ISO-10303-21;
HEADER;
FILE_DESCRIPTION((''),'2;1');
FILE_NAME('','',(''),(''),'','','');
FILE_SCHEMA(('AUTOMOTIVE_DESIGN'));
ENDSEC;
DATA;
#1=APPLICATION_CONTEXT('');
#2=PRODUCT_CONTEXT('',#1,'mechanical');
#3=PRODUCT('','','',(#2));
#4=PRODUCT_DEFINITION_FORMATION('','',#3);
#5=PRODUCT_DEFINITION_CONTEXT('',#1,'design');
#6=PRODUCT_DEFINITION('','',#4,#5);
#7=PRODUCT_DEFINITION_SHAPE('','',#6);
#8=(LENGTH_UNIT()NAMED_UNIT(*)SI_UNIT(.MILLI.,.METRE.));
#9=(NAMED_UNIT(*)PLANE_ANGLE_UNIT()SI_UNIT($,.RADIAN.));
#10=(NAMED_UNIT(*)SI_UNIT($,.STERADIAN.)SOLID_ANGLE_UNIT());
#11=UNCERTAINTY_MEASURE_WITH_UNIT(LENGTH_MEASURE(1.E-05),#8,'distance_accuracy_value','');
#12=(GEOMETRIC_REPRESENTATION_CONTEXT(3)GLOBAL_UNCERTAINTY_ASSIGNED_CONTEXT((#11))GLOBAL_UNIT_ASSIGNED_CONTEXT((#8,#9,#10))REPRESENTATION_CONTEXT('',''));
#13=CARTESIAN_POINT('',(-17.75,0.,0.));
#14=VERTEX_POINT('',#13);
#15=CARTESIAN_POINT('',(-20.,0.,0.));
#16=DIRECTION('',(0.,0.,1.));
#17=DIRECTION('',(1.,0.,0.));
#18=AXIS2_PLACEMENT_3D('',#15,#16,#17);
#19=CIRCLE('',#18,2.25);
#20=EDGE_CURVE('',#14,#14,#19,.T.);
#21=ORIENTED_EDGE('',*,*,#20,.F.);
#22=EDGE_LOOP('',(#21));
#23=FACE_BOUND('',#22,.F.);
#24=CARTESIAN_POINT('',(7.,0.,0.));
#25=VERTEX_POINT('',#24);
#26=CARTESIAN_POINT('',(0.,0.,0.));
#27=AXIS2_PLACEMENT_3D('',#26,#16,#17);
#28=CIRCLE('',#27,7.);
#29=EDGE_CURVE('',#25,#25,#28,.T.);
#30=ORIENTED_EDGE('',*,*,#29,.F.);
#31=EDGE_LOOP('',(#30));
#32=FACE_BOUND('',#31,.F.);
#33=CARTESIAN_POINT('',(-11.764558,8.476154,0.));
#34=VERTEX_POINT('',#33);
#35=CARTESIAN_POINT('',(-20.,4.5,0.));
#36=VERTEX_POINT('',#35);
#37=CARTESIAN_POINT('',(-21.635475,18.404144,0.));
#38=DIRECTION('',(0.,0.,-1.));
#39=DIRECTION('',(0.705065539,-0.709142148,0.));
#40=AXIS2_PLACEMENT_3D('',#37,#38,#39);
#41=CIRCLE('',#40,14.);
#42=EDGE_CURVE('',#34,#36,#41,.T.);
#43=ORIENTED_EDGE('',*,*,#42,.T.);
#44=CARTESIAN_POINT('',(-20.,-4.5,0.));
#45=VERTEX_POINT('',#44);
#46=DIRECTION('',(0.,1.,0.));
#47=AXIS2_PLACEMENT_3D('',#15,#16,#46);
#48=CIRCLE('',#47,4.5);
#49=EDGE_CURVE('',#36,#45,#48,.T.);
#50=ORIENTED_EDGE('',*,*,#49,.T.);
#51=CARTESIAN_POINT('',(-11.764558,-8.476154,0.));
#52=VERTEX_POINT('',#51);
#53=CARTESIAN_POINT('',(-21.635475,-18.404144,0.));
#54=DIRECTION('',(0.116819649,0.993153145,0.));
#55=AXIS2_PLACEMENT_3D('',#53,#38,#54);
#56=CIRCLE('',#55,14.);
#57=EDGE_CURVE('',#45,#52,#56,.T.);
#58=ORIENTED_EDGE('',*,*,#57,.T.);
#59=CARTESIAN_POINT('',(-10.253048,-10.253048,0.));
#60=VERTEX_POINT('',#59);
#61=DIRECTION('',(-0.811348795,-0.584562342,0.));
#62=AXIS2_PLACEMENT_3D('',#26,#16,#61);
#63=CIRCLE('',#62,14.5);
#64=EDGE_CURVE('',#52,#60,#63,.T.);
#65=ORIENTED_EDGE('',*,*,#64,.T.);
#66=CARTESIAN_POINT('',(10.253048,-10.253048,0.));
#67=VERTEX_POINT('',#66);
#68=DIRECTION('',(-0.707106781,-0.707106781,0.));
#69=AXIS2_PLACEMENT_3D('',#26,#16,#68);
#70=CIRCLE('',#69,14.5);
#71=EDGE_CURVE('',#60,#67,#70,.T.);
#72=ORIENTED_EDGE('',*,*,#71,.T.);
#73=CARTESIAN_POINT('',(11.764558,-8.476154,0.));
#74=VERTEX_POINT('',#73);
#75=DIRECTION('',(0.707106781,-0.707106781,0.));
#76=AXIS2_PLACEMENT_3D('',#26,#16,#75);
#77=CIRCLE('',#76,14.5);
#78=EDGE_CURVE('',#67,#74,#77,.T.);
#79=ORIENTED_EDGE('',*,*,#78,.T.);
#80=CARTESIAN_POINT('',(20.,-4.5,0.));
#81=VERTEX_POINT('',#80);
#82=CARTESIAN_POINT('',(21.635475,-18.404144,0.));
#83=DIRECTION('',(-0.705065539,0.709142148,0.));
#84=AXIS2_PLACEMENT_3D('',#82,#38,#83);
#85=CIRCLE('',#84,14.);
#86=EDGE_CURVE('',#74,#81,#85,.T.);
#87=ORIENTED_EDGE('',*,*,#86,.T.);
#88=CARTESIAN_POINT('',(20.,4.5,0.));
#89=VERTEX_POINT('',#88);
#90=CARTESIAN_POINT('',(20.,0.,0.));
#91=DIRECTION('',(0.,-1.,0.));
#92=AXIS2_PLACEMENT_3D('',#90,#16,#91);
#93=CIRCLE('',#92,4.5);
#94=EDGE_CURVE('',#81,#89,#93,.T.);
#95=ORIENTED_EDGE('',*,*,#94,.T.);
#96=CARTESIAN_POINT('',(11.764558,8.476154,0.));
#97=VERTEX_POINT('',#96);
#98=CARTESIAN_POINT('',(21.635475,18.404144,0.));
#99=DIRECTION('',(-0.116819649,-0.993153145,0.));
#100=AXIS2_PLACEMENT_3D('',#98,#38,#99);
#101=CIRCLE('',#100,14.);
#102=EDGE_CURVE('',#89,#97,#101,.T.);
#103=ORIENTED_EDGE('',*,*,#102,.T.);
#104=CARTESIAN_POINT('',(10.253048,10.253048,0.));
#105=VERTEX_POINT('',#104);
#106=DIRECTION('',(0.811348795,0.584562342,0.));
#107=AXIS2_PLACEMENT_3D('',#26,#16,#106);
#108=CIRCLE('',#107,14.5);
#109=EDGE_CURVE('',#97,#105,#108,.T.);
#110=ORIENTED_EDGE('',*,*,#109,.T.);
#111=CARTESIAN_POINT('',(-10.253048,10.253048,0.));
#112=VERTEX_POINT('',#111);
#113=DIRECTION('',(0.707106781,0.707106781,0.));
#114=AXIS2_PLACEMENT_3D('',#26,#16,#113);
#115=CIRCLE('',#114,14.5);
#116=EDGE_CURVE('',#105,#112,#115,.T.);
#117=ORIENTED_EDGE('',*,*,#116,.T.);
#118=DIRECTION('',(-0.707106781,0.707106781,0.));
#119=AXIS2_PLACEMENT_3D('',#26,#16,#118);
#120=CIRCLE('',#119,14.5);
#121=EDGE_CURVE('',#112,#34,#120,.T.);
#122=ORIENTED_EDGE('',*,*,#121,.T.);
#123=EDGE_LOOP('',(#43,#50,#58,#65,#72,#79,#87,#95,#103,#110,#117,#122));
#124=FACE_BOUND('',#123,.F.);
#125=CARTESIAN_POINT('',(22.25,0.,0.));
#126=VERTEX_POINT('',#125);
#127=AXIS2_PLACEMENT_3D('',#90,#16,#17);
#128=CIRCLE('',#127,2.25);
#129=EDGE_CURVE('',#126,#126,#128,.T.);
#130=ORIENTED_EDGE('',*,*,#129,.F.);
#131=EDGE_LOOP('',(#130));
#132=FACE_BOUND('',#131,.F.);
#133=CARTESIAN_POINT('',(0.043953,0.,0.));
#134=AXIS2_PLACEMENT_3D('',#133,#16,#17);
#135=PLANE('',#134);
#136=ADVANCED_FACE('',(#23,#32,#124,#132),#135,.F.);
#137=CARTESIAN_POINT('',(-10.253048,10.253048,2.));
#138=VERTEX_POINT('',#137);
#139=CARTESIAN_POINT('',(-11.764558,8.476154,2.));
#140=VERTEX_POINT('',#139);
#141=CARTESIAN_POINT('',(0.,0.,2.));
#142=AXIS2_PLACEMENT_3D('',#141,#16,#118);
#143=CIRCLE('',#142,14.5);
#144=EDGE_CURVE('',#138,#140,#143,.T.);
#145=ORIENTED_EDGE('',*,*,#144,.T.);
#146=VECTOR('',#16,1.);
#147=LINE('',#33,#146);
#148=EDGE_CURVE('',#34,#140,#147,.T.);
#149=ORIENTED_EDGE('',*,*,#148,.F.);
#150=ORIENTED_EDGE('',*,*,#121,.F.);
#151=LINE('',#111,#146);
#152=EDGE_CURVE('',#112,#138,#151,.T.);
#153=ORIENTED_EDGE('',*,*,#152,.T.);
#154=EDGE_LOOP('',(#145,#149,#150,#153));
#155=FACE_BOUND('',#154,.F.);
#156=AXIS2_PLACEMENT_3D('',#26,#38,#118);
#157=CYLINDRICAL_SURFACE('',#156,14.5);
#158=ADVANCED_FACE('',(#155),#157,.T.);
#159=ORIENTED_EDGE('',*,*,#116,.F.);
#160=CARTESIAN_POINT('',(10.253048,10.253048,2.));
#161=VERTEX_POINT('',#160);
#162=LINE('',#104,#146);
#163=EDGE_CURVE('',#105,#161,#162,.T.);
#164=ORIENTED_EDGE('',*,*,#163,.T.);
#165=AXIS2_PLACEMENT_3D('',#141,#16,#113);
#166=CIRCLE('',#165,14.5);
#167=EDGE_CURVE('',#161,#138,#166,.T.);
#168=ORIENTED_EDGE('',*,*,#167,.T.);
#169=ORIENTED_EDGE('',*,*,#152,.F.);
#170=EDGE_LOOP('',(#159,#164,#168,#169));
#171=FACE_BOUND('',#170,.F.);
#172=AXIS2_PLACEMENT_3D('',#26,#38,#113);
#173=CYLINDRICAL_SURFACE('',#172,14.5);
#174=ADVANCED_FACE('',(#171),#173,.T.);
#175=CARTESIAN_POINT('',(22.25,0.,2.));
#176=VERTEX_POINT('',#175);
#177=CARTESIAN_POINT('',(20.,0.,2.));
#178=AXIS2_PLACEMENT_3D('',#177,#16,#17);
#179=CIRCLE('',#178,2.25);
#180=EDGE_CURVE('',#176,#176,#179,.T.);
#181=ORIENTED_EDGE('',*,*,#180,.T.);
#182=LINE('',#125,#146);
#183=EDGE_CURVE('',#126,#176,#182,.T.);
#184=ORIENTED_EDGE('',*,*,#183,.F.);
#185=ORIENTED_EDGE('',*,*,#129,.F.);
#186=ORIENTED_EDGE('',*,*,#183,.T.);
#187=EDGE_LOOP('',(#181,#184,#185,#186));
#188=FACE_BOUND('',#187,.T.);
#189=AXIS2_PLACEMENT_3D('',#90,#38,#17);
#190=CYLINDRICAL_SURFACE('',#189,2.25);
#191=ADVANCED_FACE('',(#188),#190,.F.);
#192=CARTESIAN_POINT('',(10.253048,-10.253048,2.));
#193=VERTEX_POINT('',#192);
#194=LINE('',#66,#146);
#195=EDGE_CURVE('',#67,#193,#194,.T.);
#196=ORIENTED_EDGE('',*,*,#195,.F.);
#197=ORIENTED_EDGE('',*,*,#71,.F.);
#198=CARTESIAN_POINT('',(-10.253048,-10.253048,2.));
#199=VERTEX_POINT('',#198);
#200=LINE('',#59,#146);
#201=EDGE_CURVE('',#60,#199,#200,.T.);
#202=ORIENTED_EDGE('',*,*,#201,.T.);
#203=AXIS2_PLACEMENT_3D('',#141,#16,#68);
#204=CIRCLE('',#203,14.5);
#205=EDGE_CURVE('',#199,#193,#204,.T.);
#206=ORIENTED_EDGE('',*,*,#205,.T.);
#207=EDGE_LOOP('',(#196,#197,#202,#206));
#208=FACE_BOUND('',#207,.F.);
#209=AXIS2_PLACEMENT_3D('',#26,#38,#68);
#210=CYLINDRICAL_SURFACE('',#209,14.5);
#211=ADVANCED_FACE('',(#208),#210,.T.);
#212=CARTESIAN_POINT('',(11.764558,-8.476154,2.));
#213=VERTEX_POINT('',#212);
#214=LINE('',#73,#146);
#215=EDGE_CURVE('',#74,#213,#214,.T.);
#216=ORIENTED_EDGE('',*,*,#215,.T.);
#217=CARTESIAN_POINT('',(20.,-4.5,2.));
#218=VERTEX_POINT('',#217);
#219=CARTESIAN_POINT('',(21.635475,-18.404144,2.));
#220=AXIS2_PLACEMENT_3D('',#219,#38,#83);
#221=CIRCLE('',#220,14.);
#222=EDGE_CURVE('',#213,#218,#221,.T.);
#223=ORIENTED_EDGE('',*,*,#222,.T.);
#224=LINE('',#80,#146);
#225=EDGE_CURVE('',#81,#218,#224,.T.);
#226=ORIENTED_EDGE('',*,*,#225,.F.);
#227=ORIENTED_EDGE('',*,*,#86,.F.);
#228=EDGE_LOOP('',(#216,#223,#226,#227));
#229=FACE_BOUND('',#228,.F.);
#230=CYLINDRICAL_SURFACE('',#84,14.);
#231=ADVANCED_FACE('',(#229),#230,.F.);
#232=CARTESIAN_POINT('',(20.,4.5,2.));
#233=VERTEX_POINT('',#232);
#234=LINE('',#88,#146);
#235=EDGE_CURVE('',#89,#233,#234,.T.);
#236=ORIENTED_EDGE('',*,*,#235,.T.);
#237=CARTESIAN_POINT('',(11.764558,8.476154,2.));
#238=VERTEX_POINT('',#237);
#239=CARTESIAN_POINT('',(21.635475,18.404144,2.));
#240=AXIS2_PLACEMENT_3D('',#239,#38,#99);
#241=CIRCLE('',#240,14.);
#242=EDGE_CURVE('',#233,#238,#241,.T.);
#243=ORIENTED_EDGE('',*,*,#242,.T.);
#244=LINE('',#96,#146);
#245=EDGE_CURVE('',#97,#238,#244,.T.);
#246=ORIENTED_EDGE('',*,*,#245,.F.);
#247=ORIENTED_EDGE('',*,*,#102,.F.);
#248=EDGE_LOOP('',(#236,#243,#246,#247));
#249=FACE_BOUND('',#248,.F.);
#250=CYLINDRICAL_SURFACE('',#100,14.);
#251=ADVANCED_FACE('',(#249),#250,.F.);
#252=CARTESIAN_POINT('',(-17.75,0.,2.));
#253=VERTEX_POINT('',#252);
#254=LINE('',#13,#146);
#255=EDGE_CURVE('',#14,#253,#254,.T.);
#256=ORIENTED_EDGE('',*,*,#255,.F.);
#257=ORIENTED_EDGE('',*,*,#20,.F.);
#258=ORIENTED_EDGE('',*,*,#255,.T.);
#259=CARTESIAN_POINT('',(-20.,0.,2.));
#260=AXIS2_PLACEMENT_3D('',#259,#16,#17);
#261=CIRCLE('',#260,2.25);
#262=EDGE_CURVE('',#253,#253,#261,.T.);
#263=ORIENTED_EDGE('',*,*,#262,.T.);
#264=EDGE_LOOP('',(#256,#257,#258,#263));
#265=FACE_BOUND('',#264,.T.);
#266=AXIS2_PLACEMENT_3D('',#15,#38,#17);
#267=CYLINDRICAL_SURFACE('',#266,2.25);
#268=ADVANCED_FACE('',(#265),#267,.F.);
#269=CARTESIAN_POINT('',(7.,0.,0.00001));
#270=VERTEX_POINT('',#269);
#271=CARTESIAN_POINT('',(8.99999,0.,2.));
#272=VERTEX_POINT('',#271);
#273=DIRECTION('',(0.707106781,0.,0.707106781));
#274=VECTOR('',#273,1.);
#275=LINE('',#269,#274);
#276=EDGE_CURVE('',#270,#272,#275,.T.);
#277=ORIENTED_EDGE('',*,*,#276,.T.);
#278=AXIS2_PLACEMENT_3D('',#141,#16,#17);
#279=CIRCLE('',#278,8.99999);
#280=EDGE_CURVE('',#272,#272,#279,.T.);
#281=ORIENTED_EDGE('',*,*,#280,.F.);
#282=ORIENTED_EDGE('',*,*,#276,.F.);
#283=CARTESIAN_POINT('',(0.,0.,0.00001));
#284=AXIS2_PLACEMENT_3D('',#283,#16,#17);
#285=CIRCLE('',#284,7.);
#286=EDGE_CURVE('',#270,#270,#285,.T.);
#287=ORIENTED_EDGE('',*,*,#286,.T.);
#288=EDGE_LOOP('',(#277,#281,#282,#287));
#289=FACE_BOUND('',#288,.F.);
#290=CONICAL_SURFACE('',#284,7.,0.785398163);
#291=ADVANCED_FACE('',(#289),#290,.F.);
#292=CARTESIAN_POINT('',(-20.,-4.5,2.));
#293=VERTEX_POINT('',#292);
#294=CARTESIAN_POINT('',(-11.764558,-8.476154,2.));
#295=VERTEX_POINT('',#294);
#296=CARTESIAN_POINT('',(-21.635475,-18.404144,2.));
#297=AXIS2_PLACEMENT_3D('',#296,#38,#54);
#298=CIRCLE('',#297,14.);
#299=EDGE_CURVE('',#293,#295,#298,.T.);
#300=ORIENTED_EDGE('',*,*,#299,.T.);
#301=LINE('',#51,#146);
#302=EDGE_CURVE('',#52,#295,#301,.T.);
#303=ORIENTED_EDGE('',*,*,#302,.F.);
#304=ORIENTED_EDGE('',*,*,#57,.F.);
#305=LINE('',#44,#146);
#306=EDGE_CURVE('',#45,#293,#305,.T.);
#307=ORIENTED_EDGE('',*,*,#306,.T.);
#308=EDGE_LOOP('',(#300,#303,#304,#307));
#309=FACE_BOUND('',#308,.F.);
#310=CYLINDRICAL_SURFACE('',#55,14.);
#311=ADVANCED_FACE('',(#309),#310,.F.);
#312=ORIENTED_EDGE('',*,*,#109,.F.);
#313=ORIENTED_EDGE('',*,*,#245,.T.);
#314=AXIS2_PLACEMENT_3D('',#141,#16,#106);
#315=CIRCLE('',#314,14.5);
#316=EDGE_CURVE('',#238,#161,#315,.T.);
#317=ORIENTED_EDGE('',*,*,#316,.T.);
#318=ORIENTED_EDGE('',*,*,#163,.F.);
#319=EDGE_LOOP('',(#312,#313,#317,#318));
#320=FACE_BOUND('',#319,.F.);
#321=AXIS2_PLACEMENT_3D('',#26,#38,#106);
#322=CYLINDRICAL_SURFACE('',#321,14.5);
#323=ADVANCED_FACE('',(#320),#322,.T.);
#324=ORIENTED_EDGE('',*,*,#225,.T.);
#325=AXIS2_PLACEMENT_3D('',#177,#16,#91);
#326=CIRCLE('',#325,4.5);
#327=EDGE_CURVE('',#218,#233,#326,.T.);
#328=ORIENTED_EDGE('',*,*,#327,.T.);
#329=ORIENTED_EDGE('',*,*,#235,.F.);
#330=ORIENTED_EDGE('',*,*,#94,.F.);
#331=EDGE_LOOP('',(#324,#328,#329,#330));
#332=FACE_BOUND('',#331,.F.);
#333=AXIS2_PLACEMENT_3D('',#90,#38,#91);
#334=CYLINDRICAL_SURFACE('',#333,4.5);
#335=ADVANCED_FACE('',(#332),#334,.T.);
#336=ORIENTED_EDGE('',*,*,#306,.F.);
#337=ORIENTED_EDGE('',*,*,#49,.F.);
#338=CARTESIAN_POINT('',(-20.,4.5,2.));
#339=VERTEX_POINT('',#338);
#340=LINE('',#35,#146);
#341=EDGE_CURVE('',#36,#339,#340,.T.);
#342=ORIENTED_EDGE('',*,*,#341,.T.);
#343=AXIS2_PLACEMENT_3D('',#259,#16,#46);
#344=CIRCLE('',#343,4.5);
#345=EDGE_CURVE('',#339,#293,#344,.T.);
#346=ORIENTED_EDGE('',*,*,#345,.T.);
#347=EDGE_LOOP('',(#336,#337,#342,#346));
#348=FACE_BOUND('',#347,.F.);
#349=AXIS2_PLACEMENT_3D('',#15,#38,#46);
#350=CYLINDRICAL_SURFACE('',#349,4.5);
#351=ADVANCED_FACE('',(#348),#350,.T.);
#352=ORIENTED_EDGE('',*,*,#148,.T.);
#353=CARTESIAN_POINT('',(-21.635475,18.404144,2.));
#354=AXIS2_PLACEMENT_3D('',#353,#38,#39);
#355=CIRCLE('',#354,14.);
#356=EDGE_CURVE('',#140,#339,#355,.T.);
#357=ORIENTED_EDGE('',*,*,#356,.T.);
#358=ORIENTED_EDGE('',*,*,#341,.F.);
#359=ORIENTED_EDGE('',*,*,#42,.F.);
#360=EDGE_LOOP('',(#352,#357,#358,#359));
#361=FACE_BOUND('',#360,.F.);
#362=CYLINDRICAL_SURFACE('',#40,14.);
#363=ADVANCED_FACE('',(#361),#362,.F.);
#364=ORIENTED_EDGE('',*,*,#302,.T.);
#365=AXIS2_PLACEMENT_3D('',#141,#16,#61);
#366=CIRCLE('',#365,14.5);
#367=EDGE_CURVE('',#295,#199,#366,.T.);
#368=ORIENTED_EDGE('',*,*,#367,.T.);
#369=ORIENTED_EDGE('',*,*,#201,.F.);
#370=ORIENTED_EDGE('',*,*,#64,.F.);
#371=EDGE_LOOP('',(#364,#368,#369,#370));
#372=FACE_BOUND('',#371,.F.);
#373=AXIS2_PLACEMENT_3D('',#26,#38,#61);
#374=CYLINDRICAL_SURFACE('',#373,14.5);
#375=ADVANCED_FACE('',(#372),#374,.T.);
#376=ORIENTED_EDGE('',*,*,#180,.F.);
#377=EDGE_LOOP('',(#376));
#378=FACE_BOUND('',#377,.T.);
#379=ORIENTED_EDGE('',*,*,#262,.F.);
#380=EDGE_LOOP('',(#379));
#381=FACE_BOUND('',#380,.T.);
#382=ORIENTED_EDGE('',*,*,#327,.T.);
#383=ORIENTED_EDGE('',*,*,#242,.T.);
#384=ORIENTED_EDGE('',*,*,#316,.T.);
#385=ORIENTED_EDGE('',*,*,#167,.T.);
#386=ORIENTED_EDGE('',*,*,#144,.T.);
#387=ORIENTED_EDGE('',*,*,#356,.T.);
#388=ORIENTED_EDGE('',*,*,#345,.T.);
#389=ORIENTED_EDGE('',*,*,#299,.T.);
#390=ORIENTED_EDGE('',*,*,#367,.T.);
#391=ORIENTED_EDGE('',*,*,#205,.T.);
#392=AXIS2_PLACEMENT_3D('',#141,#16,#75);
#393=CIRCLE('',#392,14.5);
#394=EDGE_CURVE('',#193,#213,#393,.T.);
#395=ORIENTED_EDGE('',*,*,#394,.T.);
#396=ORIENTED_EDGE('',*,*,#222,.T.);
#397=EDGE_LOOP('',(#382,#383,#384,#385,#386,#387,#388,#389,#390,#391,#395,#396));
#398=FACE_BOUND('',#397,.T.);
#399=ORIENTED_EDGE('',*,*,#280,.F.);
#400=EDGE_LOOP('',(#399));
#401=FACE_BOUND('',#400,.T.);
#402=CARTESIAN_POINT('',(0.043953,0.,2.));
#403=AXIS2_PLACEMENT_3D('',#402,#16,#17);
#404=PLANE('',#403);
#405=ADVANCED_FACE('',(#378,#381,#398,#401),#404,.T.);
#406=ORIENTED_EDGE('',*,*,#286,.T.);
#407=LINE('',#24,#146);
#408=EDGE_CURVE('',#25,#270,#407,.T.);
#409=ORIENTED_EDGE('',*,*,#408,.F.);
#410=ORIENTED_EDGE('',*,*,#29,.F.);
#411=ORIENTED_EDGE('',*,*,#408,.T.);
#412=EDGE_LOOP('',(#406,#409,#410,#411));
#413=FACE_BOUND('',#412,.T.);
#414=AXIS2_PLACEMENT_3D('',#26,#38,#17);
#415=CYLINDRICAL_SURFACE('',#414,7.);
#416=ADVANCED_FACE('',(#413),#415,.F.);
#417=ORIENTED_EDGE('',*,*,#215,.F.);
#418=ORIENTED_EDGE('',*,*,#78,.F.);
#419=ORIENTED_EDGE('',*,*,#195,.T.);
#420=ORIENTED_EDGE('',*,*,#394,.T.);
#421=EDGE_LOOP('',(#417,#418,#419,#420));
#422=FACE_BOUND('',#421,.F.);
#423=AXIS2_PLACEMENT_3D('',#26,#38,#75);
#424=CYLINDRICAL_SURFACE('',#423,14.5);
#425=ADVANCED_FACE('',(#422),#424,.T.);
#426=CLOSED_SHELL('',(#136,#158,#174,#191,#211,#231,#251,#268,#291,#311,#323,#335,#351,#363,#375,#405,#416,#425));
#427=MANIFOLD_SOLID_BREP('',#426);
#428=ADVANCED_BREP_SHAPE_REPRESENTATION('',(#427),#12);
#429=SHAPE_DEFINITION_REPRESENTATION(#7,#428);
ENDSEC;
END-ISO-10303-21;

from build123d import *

# Parameters (mm, degrees)
F0_R     = 7
F0_R_2   = 2.25
F1_DEPTH = 2
F2_SIZE  = 1.99999


# Not quite as in the source:
# - a fillet or chamfer is up to 0.001 mm smaller than in the source, because OpenCascade refuses the exact size


with BuildPart() as f1:
    # F0 (on Top) → F1 (new body)
    with BuildSketch(Plane.XY):
        with BuildLine():
            ThreePointArc((11.7645575334, 8.4761539653), (10.9717281133, 9.333063578), (10.2530483272, 10.2530483272))
            ThreePointArc((10.2530483272, 10.2530483272), (0, 14.5), (-10.2530483272, 10.2530483272))
            ThreePointArc((-10.2530483272, 10.2530483272), (-10.9717281133, 9.333063578), (-11.7645575334, 8.4761539653))
            ThreePointArc((-11.7645575334, 8.4761539653), (-14.5, 0), (-11.7645575334, -8.4761539653))
            ThreePointArc((-11.7645575334, -8.4761539653), (-10.9717281133, -9.333063578), (-10.2530483272, -10.2530483272))
            ThreePointArc((-10.2530483272, -10.2530483272), (0, -14.5), (10.2530483272, -10.2530483272))
            ThreePointArc((10.2530483272, -10.2530483272), (10.9717281133, -9.333063578), (11.7645575334, -8.4761539653))
            ThreePointArc((11.7645575334, -8.4761539653), (13.7992044016, -4.4533086445), (14.5, 0))
            ThreePointArc((14.5, 0), (13.7992044016, 4.4533086445), (11.7645575334, 8.4761539653))
        make_face()
        Circle(F0_R, mode=Mode.SUBTRACT)
        with BuildLine():
            ThreePointArc((11.7645575334, 8.4761539653), (11.0445950741, 9.3950476129), (10.2530483272, 10.2530483272))
            ThreePointArc((10.2530483272, 10.2530483272), (10.9717281133, 9.333063578), (11.7645575334, 8.4761539653))
        make_face()
        with BuildLine():
            ThreePointArc((-11.7645575334, 8.4761539653), (-10.9717281133, 9.333063578), (-10.2530483272, 10.2530483272))
            ThreePointArc((-10.2530483272, 10.2530483272), (-11.0445950741, 9.3950476129), (-11.7645575334, 8.4761539653))
        make_face()
        with BuildLine():
            ThreePointArc((20, 4.5), (15.5484628484, 5.7966747348), (11.7645575334, 8.4761539653))
            ThreePointArc((11.7645575334, 8.4761539653), (13.7992044016, 4.4533086445), (14.5, 0))
            ThreePointArc((14.5, 0), (13.7992044016, -4.4533086445), (11.7645575334, -8.4761539653))
            ThreePointArc((11.7645575334, -8.4761539653), (15.5484628484, -5.7966747348), (20, -4.5))
            ThreePointArc((20, -4.5), (24.5, 0), (20, 4.5))
        make_face()
        with Locations((20, 0)):
            Circle(F0_R_2, mode=Mode.SUBTRACT)
        with BuildLine():
            ThreePointArc((-11.7645575334, -8.4761539653), (-14.5, 0), (-11.7645575334, 8.4761539653))
            ThreePointArc((-11.7645575334, 8.4761539653), (-15.5484628484, 5.7966747348), (-20, 4.5))
            ThreePointArc((-20, 4.5), (-24.5, 0), (-20, -4.5))
            ThreePointArc((-20, -4.5), (-15.5484628484, -5.7966747348), (-11.7645575334, -8.4761539653))
        make_face()
        with Locations((-20, 0)):
            Circle(F0_R_2, mode=Mode.SUBTRACT)
        with BuildLine():
            ThreePointArc((-10.2530483272, -10.2530483272), (-10.9717281133, -9.333063578), (-11.7645575334, -8.4761539653))
            ThreePointArc((-11.7645575334, -8.4761539653), (-11.0445950741, -9.3950476129), (-10.2530483272, -10.2530483272))
        make_face()
        with BuildLine():
            ThreePointArc((10.2530483272, -10.2530483272), (11.0445950741, -9.3950476129), (11.7645575334, -8.4761539653))
            ThreePointArc((11.7645575334, -8.4761539653), (10.9717281133, -9.333063578), (10.2530483272, -10.2530483272))
        make_face()
    extrude(amount=F1_DEPTH)

    # F2 (size 2 in the source; OpenCascade refuses exactly that, so slightly less here)
    f2_edges = [f1.edges().sort_by_distance(p)[0] for p in [
        (-7, 0, 2),
    ]]
    chamfer(f2_edges, length=F2_SIZE)


solid = f1.part
